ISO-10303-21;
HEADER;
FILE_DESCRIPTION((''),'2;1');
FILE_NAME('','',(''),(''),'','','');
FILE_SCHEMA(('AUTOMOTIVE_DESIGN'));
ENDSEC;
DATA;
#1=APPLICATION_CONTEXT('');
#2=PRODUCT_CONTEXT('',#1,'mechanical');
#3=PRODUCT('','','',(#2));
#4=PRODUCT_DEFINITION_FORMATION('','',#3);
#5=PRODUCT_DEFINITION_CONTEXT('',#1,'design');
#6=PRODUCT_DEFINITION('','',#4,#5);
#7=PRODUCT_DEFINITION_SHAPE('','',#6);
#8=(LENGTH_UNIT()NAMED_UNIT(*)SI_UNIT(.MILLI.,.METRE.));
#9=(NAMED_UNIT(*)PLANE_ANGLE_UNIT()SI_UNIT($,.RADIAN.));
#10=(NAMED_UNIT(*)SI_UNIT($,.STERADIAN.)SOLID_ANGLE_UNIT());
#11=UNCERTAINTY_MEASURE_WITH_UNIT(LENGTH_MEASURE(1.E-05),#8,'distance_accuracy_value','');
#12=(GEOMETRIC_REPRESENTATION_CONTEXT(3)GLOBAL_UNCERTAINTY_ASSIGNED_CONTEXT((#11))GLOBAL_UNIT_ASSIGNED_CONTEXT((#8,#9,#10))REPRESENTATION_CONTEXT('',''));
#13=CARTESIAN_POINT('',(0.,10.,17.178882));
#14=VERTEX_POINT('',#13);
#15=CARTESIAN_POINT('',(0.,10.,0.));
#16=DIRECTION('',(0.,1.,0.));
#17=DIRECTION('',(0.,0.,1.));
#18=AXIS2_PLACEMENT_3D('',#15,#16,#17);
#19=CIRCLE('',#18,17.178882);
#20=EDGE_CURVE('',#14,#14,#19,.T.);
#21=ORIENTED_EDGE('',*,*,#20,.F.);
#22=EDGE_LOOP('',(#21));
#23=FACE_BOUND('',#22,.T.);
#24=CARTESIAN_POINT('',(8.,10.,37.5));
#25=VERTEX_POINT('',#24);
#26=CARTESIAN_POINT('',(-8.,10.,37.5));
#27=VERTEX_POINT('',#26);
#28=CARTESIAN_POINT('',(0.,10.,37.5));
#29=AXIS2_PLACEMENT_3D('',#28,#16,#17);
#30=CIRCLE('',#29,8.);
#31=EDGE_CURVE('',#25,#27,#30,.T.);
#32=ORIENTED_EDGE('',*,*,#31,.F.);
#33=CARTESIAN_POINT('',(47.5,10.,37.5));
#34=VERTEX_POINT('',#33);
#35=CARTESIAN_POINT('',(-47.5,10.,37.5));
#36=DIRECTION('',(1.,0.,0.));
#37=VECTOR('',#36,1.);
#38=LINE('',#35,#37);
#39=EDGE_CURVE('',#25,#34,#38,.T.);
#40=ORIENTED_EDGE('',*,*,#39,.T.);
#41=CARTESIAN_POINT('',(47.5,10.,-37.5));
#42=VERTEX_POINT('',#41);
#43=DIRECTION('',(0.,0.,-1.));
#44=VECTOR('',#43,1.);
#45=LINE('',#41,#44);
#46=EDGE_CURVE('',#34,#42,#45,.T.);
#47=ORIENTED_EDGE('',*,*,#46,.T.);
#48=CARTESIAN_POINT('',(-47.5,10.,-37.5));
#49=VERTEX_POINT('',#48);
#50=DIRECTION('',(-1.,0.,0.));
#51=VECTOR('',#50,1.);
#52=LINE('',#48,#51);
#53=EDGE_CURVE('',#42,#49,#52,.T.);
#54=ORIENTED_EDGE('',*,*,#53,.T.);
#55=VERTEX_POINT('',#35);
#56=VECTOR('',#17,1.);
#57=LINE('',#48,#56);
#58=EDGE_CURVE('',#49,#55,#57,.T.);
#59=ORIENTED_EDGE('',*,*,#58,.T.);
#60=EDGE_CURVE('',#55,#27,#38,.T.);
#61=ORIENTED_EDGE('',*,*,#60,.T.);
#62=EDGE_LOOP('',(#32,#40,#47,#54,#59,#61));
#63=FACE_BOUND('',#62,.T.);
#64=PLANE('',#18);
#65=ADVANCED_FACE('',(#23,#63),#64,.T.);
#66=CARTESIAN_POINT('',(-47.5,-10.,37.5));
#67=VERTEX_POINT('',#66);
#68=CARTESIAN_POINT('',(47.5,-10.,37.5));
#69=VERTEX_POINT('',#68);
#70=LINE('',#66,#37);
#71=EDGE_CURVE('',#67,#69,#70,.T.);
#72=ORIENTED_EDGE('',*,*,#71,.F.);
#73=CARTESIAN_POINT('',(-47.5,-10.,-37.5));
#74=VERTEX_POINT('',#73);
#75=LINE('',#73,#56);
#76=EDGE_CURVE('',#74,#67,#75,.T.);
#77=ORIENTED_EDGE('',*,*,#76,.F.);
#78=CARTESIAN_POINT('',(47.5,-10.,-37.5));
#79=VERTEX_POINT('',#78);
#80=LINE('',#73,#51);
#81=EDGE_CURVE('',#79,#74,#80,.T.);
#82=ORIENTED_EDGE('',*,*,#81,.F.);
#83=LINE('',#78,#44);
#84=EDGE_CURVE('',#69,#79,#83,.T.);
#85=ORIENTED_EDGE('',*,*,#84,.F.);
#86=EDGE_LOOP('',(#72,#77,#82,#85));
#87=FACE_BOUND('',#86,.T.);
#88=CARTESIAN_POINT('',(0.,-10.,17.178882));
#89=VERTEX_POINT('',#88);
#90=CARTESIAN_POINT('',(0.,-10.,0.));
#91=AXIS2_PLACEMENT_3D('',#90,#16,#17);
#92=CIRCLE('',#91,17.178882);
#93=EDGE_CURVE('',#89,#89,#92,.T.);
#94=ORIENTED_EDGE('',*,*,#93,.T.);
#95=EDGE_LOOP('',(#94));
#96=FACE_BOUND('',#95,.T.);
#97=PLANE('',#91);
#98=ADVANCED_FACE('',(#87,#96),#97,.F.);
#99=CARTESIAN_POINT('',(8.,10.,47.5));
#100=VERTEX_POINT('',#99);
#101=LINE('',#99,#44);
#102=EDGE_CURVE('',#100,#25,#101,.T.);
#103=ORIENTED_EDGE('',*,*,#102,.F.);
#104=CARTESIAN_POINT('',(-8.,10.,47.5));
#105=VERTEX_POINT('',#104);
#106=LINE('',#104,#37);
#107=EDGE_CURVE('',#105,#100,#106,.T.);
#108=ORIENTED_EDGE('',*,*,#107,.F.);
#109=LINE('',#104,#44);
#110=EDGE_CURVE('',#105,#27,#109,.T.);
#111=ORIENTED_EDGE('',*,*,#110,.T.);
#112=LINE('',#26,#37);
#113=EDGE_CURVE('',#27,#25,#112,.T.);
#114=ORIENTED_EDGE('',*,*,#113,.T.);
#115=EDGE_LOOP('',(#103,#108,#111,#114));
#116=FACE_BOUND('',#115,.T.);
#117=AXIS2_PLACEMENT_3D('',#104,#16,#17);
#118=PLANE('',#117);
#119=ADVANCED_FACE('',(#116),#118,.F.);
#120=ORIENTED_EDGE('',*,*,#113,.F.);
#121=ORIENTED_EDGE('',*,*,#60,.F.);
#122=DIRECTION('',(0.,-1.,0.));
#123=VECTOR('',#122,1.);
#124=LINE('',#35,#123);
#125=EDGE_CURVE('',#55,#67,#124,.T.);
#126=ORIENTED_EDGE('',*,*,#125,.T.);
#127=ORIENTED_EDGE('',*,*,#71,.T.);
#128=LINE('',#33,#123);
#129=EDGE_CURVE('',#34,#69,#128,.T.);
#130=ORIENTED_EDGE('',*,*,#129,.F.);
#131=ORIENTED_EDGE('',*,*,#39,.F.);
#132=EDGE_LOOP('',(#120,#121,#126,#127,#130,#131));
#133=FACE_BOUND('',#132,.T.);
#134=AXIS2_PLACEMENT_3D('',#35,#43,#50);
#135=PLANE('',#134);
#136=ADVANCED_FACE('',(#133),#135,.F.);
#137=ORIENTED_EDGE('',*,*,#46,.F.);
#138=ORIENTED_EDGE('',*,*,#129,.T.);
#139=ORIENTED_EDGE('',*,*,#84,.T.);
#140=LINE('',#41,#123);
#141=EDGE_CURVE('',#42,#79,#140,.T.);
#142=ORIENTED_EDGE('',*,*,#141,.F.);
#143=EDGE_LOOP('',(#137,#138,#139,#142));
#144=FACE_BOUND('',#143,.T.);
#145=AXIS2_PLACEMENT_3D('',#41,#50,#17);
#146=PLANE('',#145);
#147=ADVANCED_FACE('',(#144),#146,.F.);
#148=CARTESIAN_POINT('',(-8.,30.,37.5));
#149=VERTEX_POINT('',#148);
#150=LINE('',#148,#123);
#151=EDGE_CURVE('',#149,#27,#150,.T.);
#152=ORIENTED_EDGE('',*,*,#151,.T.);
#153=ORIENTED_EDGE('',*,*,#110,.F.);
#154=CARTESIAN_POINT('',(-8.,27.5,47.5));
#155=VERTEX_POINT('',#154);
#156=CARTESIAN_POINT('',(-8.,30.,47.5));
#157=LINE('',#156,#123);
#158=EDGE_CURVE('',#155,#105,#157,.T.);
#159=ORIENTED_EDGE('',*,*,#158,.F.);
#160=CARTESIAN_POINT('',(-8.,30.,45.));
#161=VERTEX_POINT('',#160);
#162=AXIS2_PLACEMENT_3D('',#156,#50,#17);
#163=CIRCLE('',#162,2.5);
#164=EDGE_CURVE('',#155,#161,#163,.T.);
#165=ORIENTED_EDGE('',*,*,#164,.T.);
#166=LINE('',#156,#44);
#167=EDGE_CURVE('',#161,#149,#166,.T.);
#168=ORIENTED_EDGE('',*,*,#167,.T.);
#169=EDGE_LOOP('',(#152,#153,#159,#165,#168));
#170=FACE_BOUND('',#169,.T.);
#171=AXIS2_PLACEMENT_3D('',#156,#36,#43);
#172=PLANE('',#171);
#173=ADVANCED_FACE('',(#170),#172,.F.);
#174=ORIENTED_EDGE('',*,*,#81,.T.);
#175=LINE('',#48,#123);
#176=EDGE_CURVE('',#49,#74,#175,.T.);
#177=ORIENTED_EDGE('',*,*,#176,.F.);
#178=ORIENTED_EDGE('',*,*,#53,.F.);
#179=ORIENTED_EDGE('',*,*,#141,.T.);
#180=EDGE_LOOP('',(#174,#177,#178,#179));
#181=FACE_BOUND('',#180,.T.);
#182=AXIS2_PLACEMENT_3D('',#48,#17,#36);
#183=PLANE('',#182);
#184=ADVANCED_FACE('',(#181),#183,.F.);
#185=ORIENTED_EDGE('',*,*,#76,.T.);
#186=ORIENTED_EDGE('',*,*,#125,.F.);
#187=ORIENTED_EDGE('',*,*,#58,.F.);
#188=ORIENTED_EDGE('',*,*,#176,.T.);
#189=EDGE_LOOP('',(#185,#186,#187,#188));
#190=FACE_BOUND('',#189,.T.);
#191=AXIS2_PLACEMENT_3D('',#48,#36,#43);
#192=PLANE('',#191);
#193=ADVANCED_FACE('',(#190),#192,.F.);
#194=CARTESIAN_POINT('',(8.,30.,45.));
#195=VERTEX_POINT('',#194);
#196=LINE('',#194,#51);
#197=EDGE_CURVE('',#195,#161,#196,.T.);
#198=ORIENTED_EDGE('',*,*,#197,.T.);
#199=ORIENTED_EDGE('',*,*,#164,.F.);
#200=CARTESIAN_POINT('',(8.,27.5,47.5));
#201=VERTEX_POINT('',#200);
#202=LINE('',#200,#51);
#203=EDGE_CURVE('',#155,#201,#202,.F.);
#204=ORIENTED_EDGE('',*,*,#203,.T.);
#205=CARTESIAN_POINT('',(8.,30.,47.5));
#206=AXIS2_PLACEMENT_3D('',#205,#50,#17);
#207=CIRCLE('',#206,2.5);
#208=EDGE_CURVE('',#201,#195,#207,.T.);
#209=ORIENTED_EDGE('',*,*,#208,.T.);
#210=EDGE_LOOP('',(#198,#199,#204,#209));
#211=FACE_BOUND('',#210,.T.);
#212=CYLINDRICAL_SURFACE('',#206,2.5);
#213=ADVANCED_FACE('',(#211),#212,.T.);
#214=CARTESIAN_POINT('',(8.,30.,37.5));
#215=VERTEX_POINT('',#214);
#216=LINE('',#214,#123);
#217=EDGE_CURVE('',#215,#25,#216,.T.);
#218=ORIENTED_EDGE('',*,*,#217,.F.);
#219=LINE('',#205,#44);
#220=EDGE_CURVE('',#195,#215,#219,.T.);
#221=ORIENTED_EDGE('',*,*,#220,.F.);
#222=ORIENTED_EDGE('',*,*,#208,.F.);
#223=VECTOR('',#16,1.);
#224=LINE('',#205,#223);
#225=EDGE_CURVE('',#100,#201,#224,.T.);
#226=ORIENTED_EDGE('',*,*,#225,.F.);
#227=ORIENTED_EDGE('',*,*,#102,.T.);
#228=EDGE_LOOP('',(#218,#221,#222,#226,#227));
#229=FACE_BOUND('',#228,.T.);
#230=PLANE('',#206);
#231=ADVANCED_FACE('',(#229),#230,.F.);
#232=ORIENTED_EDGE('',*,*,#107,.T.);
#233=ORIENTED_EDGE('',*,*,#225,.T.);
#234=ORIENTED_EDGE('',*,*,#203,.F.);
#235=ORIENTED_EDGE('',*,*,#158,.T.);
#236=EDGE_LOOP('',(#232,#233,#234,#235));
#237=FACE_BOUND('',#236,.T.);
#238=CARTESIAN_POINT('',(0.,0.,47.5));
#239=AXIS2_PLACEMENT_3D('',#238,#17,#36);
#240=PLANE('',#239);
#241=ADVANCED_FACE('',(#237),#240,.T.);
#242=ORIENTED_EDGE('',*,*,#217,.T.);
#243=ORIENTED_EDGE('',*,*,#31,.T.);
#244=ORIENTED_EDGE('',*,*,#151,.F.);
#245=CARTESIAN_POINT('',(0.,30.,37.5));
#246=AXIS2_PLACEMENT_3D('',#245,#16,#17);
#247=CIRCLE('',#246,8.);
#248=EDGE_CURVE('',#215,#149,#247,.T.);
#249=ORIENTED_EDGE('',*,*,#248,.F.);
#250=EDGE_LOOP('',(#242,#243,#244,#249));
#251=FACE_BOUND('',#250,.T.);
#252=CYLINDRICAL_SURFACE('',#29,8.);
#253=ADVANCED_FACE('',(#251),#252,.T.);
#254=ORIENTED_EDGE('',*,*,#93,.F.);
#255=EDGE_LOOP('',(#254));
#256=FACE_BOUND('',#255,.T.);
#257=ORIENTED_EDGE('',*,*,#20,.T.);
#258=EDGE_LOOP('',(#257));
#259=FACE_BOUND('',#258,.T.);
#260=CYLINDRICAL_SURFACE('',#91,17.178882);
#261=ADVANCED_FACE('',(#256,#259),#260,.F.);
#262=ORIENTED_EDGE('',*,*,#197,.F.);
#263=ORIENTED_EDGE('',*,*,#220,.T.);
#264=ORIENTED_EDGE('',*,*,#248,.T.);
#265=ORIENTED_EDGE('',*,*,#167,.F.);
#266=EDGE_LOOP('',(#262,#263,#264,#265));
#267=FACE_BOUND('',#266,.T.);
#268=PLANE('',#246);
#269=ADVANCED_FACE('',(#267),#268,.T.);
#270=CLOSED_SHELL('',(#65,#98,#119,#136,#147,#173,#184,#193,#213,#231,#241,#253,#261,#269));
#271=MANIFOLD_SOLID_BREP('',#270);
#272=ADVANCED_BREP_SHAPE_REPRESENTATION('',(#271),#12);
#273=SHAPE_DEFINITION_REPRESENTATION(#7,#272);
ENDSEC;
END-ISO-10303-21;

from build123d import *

# Parameters (mm, degrees)
SKETCH1_W           = 95
SKETCH1_H           = 75
BOSS_EXTRUDE1_DEPTH = 10
SKETCH2_W           = 8
SKETCH2_H           = 20
REVOLVE1_ANGLE      = 180
SKETCH3_W           = 16
SKETCH3_H           = 20
BOSS_EXTRUDE2_DEPTH = 10
SKETCH4_R           = 17.178882312
CUT_EXTRUDE1_DEPTH  = 71.089228844
SWEEP2_START        = -8
SWEEP2_DEPTH        = 16


# Read off the part's stored shape, not the designer's step: Sweep2
with BuildPart() as part:
    # Sketch1 → Boss-Extrude1 (new, symmetric)
    with BuildSketch(Plane(origin=(0, 0, 0), x_dir=(1, 0, 0), z_dir=(0, 1, 0))):
        Rectangle(SKETCH1_W, SKETCH1_H)
    extrude(amount=BOSS_EXTRUDE1_DEPTH, both=True)

    # Sketch2 → Revolve1 (revolve)
    with BuildSketch(Plane.XY.offset(37.5)):
        with Locations((-4, 20)):
            Rectangle(SKETCH2_W, SKETCH2_H)
    revolve(axis=Axis((0, 10, 37.5), (0, -1, 0)), revolution_arc=REVOLVE1_ANGLE)

    # Sketch3 → Boss-Extrude2 (add)
    with BuildSketch(Plane.XY.offset(37.5)):
        with Locations((0, 20)):
            Rectangle(SKETCH3_W, SKETCH3_H)
    extrude(amount=BOSS_EXTRUDE2_DEPTH)

    # Sketch4 → Cut-Extrude1 (cut, through all)
    with BuildSketch(Plane(origin=(0, 10, 0), x_dir=(1, 0, 0), z_dir=(0, 1, 0))):
        with Locations(Location((0, 0, 0), (0, 0, 270))):
            Circle(SKETCH4_R)
    extrude(amount=-CUT_EXTRUDE1_DEPTH, mode=Mode.SUBTRACT)

    # Sweep2 outline → Sweep2 (add)
    with BuildSketch(Plane.YZ.offset(SWEEP2_START)):
        with BuildLine():
            ThreePointArc((30, 45), (31.767766953, 49.267766953), (27.5, 47.5))
            Line((27.5, 47.5), (30, 47.5))
            Line((30, 47.5), (30, 45))
        make_face()
    extrude(amount=SWEEP2_DEPTH)


solid = part.part
